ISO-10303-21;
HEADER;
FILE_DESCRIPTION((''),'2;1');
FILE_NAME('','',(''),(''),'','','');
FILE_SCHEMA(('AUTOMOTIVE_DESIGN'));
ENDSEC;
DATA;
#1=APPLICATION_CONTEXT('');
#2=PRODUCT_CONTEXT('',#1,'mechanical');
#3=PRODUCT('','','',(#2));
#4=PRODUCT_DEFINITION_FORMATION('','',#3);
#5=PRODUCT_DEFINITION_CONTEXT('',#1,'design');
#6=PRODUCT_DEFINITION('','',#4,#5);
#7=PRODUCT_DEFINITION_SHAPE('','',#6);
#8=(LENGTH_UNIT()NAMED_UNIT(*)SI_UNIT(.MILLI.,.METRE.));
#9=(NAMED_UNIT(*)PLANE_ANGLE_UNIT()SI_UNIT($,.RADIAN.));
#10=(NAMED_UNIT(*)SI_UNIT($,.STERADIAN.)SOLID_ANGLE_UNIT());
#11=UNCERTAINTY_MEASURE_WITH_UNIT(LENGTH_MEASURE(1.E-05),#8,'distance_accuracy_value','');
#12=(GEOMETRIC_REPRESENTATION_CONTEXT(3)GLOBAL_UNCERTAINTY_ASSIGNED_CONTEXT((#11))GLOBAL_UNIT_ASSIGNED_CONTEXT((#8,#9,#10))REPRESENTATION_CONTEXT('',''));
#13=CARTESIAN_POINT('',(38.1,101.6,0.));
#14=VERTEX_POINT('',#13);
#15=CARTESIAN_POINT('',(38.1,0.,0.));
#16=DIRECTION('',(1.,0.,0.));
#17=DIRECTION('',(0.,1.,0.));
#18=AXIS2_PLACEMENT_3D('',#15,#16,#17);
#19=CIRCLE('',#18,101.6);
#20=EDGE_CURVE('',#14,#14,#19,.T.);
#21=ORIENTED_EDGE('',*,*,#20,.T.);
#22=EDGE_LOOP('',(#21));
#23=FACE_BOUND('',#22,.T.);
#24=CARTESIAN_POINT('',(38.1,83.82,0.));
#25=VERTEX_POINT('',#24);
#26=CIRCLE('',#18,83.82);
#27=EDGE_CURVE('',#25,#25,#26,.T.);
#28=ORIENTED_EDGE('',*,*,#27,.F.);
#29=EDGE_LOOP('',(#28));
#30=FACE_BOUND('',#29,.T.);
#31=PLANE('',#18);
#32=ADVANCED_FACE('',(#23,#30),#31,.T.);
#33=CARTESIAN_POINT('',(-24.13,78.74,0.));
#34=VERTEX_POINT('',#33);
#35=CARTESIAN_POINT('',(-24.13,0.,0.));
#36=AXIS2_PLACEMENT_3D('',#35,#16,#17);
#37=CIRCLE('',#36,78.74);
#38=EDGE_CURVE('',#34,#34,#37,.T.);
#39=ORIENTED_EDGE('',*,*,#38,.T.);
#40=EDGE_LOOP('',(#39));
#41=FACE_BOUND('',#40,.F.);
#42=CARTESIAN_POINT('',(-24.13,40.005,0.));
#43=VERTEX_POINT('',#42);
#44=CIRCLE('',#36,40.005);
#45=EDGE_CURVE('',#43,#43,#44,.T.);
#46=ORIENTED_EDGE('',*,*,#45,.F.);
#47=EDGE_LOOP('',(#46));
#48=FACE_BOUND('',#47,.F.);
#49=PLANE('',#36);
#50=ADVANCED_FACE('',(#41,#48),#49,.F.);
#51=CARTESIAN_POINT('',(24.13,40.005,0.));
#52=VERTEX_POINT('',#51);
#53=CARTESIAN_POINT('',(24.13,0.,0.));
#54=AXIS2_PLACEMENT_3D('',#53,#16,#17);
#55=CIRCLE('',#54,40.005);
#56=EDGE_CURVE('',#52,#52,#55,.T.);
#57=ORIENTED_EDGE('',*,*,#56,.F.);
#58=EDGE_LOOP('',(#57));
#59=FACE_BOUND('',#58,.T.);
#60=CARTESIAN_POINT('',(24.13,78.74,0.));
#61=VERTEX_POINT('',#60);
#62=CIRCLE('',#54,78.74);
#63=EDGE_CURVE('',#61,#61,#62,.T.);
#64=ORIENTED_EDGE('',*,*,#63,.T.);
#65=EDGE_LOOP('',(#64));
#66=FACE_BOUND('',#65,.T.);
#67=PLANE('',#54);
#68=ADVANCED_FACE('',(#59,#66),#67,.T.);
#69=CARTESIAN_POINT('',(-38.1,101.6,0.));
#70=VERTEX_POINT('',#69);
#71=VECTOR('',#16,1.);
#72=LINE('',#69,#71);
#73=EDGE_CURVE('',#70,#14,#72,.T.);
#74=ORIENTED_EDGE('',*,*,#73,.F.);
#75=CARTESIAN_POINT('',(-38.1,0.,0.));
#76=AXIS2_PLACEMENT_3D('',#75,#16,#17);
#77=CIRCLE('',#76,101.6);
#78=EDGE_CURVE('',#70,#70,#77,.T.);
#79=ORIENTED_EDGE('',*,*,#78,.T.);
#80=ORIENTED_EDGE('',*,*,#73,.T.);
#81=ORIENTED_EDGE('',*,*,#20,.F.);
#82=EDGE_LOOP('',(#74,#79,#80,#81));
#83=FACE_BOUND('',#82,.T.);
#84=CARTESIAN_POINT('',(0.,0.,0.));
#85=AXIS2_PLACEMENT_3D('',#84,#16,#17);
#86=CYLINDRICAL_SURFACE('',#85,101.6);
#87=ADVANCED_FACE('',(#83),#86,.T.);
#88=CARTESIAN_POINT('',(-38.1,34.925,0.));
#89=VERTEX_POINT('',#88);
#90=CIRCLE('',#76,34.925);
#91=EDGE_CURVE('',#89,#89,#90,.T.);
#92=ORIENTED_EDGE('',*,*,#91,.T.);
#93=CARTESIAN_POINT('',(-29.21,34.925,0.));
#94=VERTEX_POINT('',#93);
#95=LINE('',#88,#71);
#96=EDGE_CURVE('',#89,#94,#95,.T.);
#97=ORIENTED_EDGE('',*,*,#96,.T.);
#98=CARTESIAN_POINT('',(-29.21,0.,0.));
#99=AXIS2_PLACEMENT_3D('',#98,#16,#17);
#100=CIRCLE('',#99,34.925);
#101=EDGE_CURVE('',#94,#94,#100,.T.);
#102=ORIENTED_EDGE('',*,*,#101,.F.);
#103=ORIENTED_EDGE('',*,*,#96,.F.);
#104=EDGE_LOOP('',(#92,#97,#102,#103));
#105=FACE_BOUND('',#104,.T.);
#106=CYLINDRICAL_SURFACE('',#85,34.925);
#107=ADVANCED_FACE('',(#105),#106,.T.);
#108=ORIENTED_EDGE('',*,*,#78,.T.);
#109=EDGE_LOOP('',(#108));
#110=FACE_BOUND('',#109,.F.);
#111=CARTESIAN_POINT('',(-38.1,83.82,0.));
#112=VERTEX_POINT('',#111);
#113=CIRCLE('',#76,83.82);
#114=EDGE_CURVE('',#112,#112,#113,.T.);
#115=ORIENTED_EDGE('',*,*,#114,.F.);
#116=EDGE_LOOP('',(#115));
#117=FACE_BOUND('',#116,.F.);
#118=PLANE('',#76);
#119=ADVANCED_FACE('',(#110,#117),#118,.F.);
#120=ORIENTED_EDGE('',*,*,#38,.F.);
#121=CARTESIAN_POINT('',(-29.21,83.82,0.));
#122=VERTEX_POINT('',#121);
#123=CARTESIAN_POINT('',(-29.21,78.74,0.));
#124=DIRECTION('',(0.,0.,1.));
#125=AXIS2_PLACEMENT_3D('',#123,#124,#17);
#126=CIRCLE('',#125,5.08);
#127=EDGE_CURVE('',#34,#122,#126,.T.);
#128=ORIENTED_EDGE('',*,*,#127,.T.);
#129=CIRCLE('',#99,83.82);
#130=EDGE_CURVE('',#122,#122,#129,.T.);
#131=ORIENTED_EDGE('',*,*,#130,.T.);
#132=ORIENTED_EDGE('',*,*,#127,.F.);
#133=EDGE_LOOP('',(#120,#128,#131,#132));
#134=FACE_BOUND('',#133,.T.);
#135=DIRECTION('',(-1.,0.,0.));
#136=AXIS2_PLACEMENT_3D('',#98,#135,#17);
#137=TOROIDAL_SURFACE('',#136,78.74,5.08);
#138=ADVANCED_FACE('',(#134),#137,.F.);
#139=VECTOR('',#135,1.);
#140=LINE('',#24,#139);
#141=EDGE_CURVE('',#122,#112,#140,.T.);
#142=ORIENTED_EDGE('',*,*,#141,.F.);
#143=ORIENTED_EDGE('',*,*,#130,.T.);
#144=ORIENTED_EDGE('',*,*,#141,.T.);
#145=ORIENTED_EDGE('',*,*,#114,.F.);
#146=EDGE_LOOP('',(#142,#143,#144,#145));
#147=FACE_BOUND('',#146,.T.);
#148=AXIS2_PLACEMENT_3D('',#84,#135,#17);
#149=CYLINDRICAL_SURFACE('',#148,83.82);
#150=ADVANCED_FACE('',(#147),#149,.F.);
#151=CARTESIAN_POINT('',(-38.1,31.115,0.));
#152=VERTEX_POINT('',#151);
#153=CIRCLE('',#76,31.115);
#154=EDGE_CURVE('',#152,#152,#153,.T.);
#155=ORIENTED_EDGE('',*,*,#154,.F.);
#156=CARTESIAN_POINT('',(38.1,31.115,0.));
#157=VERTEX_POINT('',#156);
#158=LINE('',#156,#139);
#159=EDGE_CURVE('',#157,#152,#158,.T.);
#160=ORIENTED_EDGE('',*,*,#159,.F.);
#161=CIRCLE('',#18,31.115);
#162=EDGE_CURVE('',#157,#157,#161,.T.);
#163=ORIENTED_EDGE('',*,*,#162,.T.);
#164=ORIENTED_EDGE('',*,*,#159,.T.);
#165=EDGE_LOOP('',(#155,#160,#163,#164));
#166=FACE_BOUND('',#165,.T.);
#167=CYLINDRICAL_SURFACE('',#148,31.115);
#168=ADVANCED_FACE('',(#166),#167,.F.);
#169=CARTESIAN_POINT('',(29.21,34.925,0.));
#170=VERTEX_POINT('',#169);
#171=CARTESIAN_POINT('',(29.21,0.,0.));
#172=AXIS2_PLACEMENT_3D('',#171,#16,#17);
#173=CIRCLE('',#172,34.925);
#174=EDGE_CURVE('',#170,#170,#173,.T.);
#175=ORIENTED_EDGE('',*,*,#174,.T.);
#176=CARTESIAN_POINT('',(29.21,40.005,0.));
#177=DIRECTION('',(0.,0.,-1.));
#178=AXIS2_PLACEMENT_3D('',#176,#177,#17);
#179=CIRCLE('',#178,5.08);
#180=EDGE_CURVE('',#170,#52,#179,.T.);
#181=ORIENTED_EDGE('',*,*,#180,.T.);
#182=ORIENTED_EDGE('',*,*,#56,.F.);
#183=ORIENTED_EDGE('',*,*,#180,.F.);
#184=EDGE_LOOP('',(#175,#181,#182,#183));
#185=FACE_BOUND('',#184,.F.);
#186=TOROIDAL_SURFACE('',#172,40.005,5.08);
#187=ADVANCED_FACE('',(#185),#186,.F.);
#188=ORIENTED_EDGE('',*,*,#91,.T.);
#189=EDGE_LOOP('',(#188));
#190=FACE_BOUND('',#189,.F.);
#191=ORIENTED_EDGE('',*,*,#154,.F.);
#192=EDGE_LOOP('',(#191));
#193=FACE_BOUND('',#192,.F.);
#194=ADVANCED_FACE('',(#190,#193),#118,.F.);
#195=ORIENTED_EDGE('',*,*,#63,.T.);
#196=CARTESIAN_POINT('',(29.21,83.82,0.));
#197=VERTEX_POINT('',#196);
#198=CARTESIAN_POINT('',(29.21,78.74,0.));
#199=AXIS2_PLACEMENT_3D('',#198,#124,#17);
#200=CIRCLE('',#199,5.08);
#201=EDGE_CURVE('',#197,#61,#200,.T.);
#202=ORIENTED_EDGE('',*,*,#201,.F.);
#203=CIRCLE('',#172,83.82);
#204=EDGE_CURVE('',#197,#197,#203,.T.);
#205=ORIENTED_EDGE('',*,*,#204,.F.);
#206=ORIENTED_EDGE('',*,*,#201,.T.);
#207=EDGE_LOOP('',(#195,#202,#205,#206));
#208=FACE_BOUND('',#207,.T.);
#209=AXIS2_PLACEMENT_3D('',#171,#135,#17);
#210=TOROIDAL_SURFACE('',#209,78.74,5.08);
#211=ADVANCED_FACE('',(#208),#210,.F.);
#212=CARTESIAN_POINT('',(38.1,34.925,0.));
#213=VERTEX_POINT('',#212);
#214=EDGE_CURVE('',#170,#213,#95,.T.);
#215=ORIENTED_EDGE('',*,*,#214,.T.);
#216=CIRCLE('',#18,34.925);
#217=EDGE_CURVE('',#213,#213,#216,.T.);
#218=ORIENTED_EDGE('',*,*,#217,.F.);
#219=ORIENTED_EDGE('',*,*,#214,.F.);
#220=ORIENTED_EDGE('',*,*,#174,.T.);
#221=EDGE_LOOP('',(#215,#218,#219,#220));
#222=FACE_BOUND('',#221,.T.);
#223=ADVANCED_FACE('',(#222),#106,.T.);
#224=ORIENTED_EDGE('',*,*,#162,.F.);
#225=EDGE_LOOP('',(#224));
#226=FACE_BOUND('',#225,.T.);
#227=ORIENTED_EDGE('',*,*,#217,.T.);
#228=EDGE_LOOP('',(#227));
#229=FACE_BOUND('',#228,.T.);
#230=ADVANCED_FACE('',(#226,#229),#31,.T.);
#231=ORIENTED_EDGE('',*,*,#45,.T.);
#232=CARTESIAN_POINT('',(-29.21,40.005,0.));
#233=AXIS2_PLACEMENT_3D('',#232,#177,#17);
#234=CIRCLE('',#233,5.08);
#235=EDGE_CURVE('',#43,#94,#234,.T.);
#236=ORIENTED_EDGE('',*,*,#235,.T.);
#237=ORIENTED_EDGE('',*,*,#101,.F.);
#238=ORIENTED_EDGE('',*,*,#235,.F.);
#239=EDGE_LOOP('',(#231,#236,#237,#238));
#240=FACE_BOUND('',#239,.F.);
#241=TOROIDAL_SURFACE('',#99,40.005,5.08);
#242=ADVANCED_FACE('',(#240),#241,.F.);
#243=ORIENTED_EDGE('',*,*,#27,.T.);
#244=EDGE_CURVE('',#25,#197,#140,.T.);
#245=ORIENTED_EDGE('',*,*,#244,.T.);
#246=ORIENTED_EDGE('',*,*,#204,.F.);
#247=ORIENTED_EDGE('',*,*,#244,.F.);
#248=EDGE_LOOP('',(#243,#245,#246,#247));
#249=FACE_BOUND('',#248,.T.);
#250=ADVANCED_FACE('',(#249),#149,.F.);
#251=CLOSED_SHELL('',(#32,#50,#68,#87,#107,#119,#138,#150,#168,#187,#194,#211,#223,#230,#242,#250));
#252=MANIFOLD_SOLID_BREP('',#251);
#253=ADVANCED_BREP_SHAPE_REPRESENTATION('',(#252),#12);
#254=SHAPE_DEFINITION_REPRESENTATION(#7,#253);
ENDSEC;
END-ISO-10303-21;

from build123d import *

# Parameters (mm, degrees)
F0_R          = 101.6
F0_R_2        = 83.82
F1_DEPTH      = 38.1
F1_DEPTH_BACK = 38.1
F0_R_3        = 34.925
F0_R_4        = 31.115
F2_DEPTH      = 24.13
F2_DEPTH_BACK = 24.13
F3_R          = 5.08


# Not quite as in the source:
# - a length typed as a fraction of an inch, garbled in the dataset ("3 / 203.2 mm" for 3/8 in), is restored


with BuildPart() as f1:
    # F0 (on Right) → F1 (new body, two sides)
    with BuildSketch(Plane.YZ) as f1_sk:
        Circle(F0_R)
        Circle(F0_R_2, mode=Mode.SUBTRACT)
    extrude(amount=F1_DEPTH)
    extrude(f1_sk.sketch, amount=-F1_DEPTH_BACK)



with BuildPart() as f1b:
    # F0 (on Right) → F1, piece 2 (new body, two sides)
    with BuildSketch(Plane.YZ) as f1_2_sk:
        Circle(F0_R_3)
        Circle(F0_R_4, mode=Mode.SUBTRACT)
    extrude(amount=F1_DEPTH)
    extrude(f1_2_sk.sketch, amount=-F1_DEPTH_BACK)


with BuildPart() as f1_1:
    add(f1.part)

    add(f1b.part)  # F2 merges F1b
    # F0 (on Right) → F2 (join, two sides)
    with BuildSketch(Plane.YZ) as f2_sk:
        Circle(F0_R_2)
        Circle(F0_R_3, mode=Mode.SUBTRACT)
    extrude(amount=F2_DEPTH)
    extrude(f2_sk.sketch, amount=-F2_DEPTH_BACK)

    # F3
    f3_edges = [f1_1.edges().sort_by_distance(p)[0] for p in [
        (24.13, -34.925, 0),
        (24.13, -83.82, 0),
        (-24.13, -34.925, 0),
        (-24.13, -83.82, 0),
    ]]
    fillet(f3_edges, radius=F3_R)


solid = f1_1.part
